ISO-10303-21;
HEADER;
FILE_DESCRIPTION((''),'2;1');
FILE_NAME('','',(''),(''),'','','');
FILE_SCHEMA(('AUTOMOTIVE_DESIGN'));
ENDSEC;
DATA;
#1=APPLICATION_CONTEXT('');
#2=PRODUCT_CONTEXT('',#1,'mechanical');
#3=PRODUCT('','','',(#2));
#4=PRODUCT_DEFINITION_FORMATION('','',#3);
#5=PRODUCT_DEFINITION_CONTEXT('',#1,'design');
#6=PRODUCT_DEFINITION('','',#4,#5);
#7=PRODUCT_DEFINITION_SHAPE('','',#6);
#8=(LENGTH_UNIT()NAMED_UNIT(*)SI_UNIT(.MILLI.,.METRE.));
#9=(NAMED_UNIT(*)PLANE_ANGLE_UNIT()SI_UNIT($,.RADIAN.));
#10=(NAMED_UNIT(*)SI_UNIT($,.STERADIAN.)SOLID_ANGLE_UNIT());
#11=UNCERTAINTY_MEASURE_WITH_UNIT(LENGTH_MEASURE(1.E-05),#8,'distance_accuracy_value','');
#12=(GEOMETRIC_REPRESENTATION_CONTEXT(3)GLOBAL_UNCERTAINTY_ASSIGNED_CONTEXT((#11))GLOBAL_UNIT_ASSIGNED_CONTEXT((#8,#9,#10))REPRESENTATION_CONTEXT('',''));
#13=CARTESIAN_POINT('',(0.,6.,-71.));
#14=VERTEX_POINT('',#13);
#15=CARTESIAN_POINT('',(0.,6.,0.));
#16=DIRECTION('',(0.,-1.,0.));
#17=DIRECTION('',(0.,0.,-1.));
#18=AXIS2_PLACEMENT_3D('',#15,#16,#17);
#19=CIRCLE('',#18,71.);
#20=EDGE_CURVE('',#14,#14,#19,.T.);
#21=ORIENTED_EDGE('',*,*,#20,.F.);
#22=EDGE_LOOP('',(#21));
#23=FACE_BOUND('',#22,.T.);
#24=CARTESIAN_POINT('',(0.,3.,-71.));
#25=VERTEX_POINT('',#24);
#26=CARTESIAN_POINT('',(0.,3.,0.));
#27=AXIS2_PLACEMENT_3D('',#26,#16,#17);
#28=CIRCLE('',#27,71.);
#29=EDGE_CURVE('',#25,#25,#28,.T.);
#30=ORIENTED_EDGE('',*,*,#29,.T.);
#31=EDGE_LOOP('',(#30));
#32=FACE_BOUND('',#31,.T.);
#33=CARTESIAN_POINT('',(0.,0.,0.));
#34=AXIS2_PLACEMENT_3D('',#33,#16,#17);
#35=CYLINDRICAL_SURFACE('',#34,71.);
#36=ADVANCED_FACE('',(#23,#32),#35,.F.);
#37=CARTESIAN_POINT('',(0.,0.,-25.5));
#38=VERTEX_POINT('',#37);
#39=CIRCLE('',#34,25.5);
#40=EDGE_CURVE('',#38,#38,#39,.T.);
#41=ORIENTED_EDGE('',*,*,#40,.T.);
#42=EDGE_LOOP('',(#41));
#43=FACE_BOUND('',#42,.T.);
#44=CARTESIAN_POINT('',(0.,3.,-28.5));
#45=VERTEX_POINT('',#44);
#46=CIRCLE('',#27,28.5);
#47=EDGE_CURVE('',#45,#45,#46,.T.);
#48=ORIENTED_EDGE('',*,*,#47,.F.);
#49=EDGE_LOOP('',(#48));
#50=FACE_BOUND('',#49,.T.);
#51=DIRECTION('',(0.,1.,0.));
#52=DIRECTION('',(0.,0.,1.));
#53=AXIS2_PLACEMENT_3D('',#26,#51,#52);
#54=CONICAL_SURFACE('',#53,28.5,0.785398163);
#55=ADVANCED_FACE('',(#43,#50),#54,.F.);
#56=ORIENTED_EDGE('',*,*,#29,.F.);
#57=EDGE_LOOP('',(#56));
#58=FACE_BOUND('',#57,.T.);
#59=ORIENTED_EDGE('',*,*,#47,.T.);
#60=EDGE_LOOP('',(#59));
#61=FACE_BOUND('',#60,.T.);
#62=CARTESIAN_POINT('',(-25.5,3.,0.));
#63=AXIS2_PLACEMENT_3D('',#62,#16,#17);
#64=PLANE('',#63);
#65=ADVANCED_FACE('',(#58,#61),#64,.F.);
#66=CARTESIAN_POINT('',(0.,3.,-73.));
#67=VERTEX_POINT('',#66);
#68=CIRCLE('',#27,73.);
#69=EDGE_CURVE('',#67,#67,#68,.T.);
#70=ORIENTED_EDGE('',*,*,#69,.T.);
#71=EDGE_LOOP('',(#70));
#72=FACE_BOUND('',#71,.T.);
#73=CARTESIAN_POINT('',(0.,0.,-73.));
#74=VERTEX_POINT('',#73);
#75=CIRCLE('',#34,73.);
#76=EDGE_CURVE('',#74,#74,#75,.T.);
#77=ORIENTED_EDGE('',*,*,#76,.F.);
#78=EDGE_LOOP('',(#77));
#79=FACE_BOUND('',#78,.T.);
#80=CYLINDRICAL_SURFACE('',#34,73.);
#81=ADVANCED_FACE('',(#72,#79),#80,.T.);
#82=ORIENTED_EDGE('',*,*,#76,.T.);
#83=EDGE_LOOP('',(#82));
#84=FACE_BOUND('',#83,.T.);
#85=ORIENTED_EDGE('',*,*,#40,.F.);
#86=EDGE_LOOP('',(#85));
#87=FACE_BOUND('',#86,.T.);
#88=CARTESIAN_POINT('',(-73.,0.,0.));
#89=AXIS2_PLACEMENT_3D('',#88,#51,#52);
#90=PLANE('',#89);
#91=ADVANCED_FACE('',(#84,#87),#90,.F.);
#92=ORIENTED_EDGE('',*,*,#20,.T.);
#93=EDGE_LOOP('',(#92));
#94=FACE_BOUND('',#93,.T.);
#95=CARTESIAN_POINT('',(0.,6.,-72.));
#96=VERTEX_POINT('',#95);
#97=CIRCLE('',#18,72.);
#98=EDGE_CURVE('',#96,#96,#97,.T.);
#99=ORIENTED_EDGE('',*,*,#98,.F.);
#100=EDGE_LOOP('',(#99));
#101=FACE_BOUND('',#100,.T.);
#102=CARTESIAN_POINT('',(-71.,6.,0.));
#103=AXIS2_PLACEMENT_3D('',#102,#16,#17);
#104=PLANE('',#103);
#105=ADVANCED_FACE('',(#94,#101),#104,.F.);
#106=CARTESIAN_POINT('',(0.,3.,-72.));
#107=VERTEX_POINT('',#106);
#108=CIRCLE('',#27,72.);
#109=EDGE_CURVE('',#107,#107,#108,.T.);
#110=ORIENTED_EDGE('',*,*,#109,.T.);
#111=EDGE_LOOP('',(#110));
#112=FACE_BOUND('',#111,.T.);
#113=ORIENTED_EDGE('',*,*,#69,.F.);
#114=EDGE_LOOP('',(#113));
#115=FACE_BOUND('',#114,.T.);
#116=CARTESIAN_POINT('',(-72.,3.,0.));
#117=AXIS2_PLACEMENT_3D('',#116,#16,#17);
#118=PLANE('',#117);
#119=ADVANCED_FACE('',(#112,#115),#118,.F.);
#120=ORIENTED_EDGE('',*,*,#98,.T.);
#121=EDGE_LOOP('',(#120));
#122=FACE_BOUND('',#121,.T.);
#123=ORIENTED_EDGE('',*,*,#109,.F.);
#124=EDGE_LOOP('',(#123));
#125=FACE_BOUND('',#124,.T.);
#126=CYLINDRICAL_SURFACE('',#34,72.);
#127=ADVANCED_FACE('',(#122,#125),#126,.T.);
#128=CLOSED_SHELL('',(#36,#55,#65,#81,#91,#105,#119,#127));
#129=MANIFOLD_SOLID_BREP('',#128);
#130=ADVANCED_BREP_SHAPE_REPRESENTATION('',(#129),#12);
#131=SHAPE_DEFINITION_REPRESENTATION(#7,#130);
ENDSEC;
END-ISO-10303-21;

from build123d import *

# Parameters (mm, degrees)
SMUSSO1_SIZE = 3


with BuildPart() as part:
    # Schizzo1 → Rivoluzione1 (revolve)
    with BuildSketch(Plane.XY, mode=Mode.PRIVATE) as rivoluzione1_sk:
        Polygon((-25.5, 0), (-25.5, 3), (-71, 3), (-71, 6), (-72, 6), (-72, 3), (-73, 3), (-73, 0), align=None)
    revolve(rivoluzione1_sk.sketch.rotate(Axis((0, 0, 0), (0, 1, 0)), 270), axis=Axis((0, 0, 0), (0, 1, 0)))

    # Smusso1
    smusso1_edges = [part.edges().sort_by_distance(p)[0] for p in [
        (0, 3, 25.5),
    ]]
    chamfer(smusso1_edges, length=SMUSSO1_SIZE - 0.0001)  # a hair under: the kernel refuses the full size


solid = part.part
